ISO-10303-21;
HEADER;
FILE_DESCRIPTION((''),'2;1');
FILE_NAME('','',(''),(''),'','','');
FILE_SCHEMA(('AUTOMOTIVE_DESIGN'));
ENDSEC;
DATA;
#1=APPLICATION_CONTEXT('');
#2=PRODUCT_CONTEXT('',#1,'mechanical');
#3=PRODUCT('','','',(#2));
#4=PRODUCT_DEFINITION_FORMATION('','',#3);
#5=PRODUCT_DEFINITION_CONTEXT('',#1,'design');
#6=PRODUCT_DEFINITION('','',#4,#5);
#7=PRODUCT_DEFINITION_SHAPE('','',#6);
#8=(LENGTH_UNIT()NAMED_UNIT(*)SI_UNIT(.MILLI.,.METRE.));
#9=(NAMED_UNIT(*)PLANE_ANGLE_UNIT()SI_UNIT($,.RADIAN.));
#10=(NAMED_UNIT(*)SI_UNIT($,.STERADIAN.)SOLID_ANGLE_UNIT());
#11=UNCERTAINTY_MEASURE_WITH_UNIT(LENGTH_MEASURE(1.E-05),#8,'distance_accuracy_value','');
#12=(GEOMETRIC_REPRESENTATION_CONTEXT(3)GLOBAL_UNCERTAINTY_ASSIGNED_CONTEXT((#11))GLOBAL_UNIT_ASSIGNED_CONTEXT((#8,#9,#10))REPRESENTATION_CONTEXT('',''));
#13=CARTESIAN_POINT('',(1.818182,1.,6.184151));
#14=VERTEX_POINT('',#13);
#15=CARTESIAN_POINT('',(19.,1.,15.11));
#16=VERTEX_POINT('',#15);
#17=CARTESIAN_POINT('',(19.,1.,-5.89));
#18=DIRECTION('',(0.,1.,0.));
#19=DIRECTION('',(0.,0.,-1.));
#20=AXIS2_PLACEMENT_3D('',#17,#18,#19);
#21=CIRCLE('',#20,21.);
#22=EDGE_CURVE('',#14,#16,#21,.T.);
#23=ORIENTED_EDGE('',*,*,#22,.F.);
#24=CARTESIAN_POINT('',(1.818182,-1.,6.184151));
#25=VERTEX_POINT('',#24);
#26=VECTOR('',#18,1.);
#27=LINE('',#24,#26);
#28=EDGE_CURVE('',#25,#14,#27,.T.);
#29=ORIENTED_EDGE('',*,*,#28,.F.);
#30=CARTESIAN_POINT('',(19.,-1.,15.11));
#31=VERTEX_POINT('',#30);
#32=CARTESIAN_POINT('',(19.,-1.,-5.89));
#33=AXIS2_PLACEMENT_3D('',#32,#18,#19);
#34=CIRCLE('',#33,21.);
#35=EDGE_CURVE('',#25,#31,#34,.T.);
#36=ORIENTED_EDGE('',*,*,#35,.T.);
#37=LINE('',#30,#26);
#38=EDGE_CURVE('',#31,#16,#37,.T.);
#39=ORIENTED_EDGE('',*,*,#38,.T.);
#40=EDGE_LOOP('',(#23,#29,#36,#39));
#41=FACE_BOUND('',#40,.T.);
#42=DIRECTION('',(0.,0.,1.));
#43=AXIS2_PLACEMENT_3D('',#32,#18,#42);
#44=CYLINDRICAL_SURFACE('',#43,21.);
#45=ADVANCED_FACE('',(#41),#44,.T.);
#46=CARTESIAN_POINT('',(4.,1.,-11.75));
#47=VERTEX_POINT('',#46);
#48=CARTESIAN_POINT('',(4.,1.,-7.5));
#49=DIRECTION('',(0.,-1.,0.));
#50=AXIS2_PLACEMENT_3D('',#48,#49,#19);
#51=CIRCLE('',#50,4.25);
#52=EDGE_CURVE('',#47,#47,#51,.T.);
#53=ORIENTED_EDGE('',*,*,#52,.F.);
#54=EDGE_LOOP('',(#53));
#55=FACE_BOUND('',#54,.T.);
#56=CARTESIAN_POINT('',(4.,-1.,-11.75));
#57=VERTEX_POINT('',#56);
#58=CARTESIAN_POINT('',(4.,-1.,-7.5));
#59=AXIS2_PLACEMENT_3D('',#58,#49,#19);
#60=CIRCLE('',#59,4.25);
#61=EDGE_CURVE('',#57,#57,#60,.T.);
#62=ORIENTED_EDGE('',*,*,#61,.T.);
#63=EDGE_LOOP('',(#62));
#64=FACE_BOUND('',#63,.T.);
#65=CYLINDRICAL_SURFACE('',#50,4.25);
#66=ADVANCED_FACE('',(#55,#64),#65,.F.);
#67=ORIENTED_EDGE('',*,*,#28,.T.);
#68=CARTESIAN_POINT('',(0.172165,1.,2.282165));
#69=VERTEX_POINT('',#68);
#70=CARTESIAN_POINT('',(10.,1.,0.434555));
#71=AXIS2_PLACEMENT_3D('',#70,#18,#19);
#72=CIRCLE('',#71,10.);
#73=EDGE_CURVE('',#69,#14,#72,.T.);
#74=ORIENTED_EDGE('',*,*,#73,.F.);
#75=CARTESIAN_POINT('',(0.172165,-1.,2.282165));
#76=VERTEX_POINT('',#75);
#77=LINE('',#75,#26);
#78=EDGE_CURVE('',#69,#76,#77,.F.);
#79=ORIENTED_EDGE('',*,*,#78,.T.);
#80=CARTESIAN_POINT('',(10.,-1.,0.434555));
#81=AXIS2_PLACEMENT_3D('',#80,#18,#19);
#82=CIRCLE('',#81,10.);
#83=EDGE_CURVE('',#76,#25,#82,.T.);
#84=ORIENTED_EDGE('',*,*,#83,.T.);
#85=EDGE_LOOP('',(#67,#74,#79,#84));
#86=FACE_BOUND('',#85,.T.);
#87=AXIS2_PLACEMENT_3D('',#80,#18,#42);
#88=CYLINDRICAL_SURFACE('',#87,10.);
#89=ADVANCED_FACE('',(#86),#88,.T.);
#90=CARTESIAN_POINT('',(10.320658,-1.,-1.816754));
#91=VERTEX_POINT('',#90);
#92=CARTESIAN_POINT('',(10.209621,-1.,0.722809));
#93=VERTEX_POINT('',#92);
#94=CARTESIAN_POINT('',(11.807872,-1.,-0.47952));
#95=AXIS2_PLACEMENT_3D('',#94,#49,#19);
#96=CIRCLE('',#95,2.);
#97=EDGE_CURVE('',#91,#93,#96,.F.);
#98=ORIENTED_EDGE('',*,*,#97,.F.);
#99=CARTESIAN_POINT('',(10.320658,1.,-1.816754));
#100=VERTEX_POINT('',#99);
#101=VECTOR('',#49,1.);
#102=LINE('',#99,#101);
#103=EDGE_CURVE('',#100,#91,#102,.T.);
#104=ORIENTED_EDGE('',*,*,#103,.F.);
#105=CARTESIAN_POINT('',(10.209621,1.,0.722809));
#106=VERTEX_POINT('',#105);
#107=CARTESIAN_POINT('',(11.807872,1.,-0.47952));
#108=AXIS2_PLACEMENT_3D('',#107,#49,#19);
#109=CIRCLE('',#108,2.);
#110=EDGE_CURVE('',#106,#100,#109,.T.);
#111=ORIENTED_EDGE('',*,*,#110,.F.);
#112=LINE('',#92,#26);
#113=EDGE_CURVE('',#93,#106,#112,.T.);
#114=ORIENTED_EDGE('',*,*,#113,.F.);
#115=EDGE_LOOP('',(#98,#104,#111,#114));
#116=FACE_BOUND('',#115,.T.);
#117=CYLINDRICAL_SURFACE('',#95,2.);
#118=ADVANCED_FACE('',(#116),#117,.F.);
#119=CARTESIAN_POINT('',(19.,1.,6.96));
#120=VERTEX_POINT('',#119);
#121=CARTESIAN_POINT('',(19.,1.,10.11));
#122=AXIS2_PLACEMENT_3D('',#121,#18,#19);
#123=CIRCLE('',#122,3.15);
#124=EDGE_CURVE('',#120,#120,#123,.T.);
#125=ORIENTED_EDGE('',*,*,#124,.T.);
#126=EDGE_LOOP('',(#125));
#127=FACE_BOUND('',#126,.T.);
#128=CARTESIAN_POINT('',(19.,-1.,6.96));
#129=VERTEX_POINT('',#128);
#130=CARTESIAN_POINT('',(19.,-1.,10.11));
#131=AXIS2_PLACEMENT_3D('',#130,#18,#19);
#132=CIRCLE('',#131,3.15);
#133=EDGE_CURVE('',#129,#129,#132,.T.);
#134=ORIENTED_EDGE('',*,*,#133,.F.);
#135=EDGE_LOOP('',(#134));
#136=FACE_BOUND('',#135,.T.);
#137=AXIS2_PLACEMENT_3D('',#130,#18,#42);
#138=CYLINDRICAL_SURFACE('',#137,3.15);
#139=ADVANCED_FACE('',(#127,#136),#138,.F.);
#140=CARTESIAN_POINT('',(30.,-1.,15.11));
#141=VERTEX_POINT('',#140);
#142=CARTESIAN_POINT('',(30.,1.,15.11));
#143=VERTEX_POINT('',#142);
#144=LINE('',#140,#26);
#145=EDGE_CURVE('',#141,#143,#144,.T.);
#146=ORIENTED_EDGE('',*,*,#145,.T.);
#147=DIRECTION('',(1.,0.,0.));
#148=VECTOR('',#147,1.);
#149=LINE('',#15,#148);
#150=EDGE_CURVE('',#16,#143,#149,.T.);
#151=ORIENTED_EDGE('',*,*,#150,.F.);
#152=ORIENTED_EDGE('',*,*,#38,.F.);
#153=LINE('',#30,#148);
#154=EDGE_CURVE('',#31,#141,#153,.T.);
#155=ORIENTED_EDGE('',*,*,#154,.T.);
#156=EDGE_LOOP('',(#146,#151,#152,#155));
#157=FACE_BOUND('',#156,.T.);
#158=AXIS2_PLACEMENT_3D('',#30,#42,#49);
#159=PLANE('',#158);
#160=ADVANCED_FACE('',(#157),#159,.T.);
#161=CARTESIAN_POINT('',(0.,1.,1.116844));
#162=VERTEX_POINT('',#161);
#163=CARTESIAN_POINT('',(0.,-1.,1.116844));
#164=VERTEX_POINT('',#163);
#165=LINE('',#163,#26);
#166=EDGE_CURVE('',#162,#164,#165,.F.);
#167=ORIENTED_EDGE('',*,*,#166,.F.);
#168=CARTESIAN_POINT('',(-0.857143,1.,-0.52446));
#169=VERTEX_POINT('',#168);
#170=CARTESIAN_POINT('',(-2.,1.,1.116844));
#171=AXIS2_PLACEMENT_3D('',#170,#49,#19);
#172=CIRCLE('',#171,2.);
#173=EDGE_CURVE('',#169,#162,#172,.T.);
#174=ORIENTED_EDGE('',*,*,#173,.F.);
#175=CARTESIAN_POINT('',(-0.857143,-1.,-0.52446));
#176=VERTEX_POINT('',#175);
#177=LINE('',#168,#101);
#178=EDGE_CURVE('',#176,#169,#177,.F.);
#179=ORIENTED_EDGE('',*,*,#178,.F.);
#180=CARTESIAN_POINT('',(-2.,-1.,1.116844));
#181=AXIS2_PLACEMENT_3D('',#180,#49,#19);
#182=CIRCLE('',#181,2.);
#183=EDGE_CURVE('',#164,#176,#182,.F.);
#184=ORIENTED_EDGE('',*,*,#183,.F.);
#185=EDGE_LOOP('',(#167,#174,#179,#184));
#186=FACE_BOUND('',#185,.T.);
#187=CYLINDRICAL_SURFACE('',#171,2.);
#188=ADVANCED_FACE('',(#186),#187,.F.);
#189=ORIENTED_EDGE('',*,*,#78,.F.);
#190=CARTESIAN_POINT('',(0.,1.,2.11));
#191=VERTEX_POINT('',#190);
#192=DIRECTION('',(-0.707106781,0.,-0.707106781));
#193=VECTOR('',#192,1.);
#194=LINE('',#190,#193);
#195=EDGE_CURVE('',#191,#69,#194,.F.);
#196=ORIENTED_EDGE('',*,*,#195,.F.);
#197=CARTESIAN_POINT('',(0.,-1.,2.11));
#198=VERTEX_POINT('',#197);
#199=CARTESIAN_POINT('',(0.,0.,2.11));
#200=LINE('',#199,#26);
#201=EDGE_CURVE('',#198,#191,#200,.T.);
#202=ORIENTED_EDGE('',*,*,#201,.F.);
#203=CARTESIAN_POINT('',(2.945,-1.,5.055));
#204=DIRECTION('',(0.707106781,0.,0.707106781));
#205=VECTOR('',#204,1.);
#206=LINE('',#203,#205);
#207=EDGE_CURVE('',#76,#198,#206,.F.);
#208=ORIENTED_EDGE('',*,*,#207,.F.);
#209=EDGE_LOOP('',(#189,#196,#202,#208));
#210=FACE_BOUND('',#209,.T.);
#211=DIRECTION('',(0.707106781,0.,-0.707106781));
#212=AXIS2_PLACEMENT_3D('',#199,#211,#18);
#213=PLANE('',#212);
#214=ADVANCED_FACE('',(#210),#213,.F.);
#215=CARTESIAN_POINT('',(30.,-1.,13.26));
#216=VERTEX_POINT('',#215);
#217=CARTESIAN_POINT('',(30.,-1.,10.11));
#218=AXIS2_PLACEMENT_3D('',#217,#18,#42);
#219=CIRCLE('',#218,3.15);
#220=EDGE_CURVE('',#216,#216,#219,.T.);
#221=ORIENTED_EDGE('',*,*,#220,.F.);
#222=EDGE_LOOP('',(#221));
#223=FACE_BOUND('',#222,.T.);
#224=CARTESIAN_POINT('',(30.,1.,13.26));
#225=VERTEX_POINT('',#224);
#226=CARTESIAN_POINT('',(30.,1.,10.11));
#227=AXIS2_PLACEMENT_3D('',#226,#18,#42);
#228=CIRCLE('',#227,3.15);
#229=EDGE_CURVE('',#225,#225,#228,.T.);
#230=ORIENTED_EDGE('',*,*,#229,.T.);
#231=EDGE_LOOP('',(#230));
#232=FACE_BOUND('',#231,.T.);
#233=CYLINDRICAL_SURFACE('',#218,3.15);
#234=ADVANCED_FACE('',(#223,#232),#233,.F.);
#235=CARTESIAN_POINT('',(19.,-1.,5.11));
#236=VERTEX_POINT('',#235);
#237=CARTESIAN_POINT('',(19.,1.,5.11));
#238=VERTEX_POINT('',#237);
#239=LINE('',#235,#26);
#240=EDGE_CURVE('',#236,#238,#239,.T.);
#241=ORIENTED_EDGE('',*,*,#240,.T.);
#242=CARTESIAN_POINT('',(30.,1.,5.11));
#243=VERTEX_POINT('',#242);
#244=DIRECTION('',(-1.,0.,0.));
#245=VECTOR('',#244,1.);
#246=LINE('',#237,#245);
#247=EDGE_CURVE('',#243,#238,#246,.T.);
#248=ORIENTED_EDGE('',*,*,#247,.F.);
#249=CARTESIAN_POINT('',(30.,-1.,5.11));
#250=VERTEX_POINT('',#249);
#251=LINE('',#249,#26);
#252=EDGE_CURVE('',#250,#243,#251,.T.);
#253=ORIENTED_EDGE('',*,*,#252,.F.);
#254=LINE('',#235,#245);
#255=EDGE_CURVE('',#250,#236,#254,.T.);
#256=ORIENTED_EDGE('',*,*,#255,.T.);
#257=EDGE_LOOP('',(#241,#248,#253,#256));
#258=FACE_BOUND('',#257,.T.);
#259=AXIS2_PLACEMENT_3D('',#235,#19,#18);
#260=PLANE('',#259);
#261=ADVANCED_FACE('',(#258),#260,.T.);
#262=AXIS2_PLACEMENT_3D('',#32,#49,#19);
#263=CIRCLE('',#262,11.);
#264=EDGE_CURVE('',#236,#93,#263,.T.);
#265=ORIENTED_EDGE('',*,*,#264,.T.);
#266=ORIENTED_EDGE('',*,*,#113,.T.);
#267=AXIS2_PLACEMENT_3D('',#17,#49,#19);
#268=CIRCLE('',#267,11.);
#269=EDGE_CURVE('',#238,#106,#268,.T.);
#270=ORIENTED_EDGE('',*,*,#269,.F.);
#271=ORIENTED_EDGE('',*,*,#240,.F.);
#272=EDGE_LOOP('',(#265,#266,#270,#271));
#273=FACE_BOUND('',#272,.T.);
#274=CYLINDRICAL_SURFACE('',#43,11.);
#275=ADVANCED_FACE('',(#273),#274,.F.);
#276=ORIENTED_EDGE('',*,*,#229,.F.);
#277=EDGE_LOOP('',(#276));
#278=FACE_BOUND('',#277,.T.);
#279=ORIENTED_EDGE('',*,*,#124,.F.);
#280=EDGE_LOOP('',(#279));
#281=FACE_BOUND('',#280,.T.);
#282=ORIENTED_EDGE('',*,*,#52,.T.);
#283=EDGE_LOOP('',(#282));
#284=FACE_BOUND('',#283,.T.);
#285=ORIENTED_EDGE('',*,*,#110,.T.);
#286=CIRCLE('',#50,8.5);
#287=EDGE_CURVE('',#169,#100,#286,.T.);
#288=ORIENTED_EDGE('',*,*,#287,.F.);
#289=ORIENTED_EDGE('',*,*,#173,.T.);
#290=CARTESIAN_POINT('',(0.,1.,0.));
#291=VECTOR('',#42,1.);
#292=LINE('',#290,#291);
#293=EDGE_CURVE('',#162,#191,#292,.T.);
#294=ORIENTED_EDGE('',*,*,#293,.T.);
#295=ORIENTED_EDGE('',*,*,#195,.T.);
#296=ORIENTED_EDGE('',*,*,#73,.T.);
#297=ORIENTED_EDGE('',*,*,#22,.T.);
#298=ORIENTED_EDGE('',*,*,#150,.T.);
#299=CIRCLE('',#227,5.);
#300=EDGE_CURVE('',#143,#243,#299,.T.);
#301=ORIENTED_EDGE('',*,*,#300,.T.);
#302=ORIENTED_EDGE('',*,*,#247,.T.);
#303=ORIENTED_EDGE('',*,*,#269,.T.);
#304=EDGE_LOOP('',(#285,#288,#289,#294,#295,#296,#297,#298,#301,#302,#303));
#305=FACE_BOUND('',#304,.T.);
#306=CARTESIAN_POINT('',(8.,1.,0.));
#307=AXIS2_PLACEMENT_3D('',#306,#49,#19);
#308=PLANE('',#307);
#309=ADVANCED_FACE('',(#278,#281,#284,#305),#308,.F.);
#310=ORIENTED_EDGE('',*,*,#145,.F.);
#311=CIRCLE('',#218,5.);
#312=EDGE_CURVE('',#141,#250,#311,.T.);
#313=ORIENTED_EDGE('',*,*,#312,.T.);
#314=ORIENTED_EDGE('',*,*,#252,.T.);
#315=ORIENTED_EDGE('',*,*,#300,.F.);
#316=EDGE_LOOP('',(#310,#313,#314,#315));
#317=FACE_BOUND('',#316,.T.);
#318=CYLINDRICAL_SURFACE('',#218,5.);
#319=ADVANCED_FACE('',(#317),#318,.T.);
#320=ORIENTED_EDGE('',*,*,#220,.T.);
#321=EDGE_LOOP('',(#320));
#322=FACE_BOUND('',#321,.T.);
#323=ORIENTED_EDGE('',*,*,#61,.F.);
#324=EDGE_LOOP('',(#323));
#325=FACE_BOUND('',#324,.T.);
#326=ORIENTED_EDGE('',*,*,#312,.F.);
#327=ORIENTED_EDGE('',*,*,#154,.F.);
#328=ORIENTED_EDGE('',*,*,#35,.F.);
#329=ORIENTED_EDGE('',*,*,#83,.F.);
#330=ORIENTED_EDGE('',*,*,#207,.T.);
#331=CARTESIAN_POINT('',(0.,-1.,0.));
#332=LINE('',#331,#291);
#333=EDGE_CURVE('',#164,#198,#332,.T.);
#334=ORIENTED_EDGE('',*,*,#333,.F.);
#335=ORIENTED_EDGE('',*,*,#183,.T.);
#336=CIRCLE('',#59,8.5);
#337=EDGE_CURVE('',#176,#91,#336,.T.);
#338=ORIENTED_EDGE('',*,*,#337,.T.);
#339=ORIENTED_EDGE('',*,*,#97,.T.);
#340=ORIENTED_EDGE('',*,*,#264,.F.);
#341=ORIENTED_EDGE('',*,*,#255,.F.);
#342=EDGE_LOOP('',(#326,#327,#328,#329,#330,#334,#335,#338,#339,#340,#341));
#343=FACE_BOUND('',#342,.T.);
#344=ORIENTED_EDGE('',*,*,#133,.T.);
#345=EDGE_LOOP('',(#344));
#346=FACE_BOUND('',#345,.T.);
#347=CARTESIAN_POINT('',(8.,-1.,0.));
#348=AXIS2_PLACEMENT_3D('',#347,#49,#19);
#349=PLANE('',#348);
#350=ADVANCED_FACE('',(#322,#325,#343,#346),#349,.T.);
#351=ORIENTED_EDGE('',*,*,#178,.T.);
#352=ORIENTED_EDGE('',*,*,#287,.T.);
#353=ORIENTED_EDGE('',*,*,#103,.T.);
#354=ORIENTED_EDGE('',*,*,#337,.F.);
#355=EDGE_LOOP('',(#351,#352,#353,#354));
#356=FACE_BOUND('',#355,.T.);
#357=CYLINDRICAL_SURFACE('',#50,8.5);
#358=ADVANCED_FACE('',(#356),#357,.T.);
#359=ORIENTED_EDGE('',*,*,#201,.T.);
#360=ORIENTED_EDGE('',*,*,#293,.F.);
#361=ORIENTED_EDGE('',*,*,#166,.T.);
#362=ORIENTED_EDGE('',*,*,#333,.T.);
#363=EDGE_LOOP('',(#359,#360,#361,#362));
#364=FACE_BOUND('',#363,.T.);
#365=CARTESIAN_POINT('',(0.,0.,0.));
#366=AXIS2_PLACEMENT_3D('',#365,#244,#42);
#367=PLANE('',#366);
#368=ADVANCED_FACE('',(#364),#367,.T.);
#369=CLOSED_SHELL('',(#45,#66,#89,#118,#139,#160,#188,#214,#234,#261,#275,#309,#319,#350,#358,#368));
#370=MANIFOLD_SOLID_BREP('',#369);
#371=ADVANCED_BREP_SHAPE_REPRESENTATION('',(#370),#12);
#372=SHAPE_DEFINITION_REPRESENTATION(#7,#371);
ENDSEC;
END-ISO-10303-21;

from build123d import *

# Parameters (mm, degrees)
SKETCH1_W           = 10.11
SKETCH1_H           = 2
EXTRUDE_THIN1_DEPTH = 8
CHAMFER1_SIZE       = 8
SKETCH2_R           = 3.15
BOSS_EXTRUDE1_DEPTH = 2
SKETCH6_R           = 8.5
SKETCH6_R_2         = 4.25
BOSS_EXTRUDE4_DEPTH = 2
FILLET4_R           = 2


with BuildPart() as part:
    # Sketch1 → Extrude-Thin1 (new body)
    with BuildSketch(Plane(origin=(0, 0, 0), x_dir=(0, 0, -1), z_dir=(1, 0, 0))):
        with Locations((-5.055, 0)):
            Rectangle(SKETCH1_W, SKETCH1_H)
    extrude(amount=EXTRUDE_THIN1_DEPTH)

    # Chamfer1
    chamfer1_edges = [part.edges().sort_by_distance(p)[0] for p in [
        (0, 0, 10.11),
    ]]
    chamfer(chamfer1_edges, length=CHAMFER1_SIZE - 0.0001)  # a hair under: the kernel refuses the full size

    # Sketch2 → Boss-Extrude1 (add)
    with BuildSketch(Plane(origin=(0, 1, 0), x_dir=(1, 0, 0), z_dir=(0, 1, 0))):
        with BuildLine():
            Line((0, -0.43455532), (0, 0))
            ThreePointArc((0, 0), (4.444005662, 0.947416312), (8.29515392, 3.358938877))
            ThreePointArc((8.29515392, 3.358938877), (12.175107047, -2.736751195), (19, -5.11))
            Line((19, -5.11), (30, -5.11))
            ThreePointArc((30, -5.11), (35, -10.11), (30, -15.11))
            Line((30, -15.11), (19, -15.11))
            ThreePointArc((19, -15.11), (9.319017932, -12.745412155), (1.818181818, -6.184151066))
            ThreePointArc((1.818181818, -6.184151066), (0.465374108, -3.449668766), (0, -0.43455532))
        make_face()
        with Locations(Location((30, -10.11, 0), (0, 0, 270))):
            Circle(SKETCH2_R, mode=Mode.SUBTRACT)
        with Locations(Location((19, -10.11, 0), (0, 0, 90))):
            Circle(SKETCH2_R, mode=Mode.SUBTRACT)
    extrude(amount=-BOSS_EXTRUDE1_DEPTH)

    # Sketch6 → Boss-Extrude4 (add)
    with BuildSketch(Plane.XZ.offset(1)):
        with Locations((4, -7.5)):
            Circle(SKETCH6_R)
        with Locations(Location((4, -7.5, 0), (0, 0, 270))):
            Circle(SKETCH6_R_2, mode=Mode.SUBTRACT)
    extrude(amount=-BOSS_EXTRUDE4_DEPTH)

    # Fillet4
    fillet4_edges = [part.edges().sort_by_distance(p)[0] for p in [
        (0, 0, 0),
        (9.243332379, 0, -0.809897941),
    ]]
    fillet(fillet4_edges, radius=FILLET4_R)


solid = part.part
